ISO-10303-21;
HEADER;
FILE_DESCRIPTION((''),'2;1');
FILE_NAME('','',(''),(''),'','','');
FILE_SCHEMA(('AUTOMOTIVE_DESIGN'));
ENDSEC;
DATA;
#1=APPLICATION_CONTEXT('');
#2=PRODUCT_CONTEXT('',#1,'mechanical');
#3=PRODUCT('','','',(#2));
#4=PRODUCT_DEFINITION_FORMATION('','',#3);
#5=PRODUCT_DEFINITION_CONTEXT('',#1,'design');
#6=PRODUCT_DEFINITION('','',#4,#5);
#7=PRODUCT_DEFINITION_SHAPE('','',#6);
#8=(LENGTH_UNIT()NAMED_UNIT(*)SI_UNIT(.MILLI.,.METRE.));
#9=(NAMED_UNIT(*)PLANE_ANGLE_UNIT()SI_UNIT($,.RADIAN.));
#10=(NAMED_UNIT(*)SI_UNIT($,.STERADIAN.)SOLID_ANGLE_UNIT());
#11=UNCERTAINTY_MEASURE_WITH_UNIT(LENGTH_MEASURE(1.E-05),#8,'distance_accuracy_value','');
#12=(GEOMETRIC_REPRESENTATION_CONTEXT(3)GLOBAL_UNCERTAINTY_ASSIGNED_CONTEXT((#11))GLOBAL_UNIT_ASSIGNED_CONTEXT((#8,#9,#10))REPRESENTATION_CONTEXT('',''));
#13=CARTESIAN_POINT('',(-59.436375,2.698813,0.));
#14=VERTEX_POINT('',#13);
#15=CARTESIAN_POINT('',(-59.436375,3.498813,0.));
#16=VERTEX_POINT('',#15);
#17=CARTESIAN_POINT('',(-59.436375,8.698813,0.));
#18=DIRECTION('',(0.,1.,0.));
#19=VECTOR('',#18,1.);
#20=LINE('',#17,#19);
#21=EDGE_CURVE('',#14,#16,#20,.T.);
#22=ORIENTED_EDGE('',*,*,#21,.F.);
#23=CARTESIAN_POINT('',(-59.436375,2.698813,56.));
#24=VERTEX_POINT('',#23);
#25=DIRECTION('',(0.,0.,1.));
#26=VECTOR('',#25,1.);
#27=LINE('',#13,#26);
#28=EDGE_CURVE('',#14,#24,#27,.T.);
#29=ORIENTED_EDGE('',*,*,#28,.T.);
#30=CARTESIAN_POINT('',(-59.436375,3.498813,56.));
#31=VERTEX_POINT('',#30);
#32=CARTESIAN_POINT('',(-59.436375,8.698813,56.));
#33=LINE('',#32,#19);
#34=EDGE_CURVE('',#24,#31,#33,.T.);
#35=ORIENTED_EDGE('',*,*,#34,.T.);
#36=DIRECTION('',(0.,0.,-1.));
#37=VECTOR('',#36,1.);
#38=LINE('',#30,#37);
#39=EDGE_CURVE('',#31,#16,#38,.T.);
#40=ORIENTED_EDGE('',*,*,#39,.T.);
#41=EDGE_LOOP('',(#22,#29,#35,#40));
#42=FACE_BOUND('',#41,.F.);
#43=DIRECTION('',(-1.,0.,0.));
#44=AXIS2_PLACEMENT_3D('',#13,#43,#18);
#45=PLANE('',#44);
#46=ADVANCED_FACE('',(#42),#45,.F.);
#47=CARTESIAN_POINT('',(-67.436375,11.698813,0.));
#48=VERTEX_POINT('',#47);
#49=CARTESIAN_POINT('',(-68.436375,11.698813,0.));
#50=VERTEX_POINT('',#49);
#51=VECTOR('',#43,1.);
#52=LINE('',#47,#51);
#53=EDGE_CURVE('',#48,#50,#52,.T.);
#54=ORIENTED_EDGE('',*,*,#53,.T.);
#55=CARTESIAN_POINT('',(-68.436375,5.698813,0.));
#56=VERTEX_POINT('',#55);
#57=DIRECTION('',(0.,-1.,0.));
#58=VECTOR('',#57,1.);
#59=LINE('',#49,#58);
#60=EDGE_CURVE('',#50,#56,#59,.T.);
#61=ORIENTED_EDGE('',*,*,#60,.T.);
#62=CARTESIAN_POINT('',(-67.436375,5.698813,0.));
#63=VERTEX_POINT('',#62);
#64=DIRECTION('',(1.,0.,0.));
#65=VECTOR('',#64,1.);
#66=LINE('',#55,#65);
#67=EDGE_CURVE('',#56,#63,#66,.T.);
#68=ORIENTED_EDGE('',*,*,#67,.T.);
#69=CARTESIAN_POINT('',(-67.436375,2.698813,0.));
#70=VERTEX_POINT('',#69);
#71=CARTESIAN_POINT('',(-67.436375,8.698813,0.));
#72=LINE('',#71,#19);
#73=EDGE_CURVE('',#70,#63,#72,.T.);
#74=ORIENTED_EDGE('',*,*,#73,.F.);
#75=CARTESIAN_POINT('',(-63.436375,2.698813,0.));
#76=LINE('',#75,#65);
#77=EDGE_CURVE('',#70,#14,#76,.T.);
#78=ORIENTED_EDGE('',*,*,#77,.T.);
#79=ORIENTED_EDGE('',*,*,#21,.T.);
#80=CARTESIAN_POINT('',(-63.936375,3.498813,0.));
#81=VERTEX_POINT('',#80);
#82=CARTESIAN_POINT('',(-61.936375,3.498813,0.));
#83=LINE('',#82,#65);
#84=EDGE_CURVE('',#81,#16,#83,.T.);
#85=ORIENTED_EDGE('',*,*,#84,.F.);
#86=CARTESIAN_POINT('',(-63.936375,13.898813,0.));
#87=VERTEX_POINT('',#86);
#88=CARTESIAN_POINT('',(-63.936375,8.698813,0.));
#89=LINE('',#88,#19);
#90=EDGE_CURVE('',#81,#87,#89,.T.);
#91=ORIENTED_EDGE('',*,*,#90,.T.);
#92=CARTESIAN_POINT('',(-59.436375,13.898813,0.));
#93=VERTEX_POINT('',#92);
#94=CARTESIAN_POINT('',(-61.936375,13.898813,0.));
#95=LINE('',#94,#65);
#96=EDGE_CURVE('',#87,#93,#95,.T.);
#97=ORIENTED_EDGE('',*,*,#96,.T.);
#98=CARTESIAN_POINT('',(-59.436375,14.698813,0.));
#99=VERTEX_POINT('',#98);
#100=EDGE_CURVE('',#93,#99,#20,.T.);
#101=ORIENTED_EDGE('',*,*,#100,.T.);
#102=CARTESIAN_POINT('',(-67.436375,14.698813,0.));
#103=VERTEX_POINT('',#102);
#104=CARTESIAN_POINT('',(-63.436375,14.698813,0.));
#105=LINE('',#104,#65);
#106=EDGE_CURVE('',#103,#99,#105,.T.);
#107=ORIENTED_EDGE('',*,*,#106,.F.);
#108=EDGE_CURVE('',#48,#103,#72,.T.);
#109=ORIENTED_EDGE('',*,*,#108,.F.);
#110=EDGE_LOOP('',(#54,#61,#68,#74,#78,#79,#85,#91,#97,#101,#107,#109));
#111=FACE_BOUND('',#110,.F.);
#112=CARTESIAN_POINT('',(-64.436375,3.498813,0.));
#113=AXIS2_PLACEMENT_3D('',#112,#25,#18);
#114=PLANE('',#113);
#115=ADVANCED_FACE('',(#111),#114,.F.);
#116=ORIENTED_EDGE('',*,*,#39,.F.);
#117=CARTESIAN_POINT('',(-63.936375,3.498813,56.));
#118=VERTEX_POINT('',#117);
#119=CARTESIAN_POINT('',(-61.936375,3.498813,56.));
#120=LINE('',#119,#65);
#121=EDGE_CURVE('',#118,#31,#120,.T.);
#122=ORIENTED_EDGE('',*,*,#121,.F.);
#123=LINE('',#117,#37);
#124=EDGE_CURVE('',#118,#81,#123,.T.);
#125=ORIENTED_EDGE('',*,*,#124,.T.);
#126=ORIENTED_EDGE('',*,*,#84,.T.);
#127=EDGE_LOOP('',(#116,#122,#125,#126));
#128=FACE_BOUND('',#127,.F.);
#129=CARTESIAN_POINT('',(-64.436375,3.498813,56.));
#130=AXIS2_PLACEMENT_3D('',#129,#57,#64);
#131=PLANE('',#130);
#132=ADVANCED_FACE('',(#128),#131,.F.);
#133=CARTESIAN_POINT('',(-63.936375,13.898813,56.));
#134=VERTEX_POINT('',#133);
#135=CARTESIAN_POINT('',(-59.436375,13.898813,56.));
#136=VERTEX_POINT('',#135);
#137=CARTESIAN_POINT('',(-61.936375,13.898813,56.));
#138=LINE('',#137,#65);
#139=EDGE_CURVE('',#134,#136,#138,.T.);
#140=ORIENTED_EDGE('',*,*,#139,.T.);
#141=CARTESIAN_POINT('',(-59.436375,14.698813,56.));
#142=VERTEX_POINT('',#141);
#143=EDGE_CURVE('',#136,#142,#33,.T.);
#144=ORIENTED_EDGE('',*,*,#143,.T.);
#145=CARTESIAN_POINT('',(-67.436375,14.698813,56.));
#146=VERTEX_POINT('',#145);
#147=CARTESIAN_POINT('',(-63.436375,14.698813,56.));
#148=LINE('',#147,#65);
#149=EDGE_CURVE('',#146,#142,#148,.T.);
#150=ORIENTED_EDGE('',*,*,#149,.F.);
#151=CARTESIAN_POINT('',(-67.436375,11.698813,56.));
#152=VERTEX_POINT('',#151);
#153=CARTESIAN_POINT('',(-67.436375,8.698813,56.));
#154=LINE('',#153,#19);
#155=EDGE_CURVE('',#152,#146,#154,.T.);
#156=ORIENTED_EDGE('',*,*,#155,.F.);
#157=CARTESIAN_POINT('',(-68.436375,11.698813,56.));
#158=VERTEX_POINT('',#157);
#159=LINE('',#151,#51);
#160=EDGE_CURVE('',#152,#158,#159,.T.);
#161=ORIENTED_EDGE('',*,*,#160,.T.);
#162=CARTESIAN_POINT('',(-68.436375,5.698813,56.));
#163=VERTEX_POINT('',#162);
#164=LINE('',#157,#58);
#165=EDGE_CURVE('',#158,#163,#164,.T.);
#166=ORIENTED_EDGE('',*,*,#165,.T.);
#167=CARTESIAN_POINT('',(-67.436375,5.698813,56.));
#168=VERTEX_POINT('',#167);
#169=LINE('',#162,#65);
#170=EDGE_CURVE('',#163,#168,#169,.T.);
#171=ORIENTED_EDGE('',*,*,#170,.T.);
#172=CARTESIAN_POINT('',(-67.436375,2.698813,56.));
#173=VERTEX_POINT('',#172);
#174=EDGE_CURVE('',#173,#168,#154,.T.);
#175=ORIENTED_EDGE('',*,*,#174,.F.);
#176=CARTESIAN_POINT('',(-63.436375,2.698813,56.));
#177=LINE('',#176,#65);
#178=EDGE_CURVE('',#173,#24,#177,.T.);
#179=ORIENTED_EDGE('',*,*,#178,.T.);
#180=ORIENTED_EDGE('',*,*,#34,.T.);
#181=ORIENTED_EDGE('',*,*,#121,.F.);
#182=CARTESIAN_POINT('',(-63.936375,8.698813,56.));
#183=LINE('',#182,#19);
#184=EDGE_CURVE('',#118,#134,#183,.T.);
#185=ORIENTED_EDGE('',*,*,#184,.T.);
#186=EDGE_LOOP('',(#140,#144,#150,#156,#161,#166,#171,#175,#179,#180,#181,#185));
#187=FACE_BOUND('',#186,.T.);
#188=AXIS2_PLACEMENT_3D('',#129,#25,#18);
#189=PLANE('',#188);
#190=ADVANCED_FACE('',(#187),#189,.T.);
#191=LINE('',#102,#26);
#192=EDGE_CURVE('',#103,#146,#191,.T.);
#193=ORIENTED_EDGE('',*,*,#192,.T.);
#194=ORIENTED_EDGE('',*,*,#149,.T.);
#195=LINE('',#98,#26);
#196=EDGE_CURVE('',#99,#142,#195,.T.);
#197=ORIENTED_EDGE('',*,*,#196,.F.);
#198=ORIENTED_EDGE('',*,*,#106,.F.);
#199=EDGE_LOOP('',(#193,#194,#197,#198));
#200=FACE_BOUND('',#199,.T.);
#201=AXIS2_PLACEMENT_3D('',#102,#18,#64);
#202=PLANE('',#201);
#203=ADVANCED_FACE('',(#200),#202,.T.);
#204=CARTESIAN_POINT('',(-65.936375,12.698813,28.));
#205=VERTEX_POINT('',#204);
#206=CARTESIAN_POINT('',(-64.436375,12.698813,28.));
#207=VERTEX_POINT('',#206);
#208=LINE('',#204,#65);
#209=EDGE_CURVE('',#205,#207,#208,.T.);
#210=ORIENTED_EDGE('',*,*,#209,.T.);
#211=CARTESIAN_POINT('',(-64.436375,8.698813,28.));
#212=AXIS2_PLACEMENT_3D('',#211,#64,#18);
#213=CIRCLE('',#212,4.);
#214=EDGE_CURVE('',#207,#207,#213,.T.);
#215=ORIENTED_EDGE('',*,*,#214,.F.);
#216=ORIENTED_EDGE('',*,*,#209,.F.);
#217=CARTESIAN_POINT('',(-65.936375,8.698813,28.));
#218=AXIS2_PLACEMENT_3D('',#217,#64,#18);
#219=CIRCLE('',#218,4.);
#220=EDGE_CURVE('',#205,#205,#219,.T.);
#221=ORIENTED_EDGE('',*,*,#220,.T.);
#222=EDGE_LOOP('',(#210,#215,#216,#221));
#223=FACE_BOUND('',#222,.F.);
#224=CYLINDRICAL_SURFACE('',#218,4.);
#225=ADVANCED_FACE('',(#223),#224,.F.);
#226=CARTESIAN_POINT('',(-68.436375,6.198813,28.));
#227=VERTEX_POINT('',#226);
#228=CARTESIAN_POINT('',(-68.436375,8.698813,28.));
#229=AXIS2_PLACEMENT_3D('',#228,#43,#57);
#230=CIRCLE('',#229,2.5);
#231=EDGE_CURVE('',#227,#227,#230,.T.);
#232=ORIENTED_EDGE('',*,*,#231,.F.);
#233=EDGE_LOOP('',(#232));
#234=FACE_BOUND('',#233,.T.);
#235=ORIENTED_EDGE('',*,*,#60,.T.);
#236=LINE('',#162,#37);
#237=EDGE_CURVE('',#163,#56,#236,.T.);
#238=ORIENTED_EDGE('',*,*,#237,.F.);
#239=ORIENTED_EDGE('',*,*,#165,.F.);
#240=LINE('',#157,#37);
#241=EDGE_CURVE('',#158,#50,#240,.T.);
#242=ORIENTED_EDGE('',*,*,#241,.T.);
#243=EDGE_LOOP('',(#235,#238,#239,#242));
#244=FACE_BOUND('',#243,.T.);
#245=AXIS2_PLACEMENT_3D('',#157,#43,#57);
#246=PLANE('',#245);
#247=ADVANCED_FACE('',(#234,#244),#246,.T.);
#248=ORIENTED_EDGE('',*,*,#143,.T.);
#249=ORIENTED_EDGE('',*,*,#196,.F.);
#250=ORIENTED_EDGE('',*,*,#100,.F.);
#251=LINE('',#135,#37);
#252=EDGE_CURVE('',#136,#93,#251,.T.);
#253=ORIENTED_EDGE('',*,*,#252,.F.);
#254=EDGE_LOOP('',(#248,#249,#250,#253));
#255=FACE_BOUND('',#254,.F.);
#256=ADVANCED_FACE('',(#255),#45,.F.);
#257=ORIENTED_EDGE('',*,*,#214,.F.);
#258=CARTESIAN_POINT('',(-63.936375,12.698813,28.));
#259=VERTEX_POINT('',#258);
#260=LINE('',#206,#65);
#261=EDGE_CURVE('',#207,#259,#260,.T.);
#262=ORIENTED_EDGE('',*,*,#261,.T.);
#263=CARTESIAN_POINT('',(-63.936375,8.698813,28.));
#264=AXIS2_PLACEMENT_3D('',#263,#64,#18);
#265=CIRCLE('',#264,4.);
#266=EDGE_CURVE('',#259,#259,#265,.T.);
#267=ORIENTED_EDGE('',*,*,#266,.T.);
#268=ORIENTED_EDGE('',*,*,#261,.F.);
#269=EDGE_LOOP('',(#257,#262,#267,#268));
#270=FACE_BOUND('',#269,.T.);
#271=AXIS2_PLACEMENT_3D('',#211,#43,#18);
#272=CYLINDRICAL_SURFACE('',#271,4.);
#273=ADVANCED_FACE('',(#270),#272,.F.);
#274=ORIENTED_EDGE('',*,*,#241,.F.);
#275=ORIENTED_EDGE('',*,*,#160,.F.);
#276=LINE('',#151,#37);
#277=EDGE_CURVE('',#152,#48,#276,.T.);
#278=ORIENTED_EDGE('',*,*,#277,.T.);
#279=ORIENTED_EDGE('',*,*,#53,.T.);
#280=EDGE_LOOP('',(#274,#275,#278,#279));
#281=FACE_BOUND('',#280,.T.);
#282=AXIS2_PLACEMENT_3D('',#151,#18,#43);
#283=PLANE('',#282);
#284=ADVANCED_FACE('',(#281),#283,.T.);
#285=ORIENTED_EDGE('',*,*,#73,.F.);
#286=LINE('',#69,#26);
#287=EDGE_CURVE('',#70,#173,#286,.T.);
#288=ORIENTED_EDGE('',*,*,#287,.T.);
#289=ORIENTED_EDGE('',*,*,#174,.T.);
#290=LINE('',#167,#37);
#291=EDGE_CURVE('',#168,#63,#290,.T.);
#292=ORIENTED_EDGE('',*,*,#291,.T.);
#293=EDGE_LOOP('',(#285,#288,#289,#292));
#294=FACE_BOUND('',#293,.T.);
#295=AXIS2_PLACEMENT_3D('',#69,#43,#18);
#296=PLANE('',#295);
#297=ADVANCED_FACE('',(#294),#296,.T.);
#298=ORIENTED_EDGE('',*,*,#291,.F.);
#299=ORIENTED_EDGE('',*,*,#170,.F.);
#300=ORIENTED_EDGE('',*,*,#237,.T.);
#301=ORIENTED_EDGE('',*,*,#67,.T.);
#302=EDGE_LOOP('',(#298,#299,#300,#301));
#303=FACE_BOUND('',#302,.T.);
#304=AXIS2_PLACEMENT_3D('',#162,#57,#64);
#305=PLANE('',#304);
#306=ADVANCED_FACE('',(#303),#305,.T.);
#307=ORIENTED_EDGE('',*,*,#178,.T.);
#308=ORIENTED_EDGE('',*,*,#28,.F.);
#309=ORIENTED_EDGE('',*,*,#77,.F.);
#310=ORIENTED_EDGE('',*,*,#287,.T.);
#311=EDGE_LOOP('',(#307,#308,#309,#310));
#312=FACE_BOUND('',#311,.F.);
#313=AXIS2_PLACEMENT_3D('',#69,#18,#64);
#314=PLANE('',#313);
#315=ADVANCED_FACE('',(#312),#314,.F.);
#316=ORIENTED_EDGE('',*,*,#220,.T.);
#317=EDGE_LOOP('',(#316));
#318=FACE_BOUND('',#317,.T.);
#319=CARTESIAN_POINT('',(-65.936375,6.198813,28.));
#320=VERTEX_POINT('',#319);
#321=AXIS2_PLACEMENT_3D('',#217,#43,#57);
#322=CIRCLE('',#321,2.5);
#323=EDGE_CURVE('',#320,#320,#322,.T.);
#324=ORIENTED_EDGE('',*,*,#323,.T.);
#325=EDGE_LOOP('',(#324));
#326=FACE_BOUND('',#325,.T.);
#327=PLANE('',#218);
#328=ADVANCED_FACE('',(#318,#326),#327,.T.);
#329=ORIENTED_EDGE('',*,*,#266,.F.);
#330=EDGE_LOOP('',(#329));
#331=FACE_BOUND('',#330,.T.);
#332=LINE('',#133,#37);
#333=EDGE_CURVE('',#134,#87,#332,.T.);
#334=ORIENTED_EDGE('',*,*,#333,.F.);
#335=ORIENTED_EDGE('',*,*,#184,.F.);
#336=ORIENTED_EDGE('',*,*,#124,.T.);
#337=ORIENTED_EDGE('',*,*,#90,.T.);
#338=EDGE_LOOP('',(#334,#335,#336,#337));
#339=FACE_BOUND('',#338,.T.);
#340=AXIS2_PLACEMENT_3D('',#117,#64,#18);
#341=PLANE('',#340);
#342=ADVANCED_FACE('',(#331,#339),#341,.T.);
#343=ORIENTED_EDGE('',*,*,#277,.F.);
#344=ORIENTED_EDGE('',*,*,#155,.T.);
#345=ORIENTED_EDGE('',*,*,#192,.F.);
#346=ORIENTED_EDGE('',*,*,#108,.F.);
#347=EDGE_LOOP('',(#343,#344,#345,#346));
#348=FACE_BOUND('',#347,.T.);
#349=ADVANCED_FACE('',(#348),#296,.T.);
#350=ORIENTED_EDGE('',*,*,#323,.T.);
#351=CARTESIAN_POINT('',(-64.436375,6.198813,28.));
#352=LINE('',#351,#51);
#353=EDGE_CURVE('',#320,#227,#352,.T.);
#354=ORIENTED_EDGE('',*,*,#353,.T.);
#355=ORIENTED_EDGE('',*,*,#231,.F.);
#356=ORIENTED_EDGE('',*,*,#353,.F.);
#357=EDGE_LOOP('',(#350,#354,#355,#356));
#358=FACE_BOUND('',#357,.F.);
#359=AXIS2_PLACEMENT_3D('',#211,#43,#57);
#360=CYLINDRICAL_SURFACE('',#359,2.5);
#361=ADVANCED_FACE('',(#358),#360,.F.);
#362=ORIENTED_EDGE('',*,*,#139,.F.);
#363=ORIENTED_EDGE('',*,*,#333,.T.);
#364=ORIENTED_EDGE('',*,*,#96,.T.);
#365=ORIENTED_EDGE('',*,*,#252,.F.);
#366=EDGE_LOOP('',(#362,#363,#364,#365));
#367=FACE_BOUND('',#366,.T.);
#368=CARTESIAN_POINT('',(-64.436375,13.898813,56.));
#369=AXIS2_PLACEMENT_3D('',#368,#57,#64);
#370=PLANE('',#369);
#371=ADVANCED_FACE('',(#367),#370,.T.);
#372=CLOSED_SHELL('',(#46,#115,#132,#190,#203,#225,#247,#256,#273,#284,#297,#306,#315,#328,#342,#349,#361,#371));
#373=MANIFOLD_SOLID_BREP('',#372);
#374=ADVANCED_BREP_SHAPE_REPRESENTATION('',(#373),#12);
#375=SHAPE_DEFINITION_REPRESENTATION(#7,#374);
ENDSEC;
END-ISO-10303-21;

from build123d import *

# Parameters (mm, degrees)
F0_W           = 8
F0_H           = 12
F1_DEPTH       = 56
F2_W           = 5
F2_H           = 10.4
F3_DEPTH       = 56
F5_DEPTH       = 56
F7_D           = 5
F7_DEPTH       = 34
F7_CBORE_D     = 8
F7_CBORE_DEPTH = 1.5
F7_TIP         = 1.5021515476
F8_DEPTH       = 0.5


with BuildPart() as f1:
    # F0 (on Top) → F1 (new body)
    with BuildSketch(Plane.XY):
        with Locations((-63.4363747239, 8.6988127381)):
            Rectangle(F0_W, F0_H)
    extrude(amount=F1_DEPTH)

    # F2 (on face) → F3 (cut)
    with BuildSketch(Plane.XY.offset(56)):
        with Locations((-61.9363747239, 8.6988127381)):
            Rectangle(F2_W, F2_H)
    extrude(amount=-F3_DEPTH, mode=Mode.SUBTRACT)

    # F4 (on face) → F5 (join)
    with BuildSketch(Plane.XY.offset(56)):
        Polygon((-67.4363747239, 5.6988127381), (-67.4363747239, 8.6988127381), (-67.4363747239, 11.6988127381), (-68.4363747239, 11.6988127381), (-68.4363747239, 5.6988127381), align=None)
    extrude(amount=-F5_DEPTH)

    # F7
    with Locations(Plane.YZ.offset(-64.4363747239)):
        with Locations((8.6988127381, 28)):
            CounterBoreHole(F7_D / 2, F7_CBORE_D / 2, F7_CBORE_DEPTH, depth=F7_DEPTH)
            with Locations((0, 0, -(F7_DEPTH + F7_TIP / 2))):  # 118° drill point
                Cone(0, F7_D / 2, F7_TIP, mode=Mode.SUBTRACT)

    # F8 (add): a face of the model
    f8_faces = [f1.faces().sort_by_distance(p)[0] for p in [
        (-64.4363747239, 13.3292374577, 28),
    ]]
    extrude(f8_faces, amount=F8_DEPTH)


solid = f1.part
